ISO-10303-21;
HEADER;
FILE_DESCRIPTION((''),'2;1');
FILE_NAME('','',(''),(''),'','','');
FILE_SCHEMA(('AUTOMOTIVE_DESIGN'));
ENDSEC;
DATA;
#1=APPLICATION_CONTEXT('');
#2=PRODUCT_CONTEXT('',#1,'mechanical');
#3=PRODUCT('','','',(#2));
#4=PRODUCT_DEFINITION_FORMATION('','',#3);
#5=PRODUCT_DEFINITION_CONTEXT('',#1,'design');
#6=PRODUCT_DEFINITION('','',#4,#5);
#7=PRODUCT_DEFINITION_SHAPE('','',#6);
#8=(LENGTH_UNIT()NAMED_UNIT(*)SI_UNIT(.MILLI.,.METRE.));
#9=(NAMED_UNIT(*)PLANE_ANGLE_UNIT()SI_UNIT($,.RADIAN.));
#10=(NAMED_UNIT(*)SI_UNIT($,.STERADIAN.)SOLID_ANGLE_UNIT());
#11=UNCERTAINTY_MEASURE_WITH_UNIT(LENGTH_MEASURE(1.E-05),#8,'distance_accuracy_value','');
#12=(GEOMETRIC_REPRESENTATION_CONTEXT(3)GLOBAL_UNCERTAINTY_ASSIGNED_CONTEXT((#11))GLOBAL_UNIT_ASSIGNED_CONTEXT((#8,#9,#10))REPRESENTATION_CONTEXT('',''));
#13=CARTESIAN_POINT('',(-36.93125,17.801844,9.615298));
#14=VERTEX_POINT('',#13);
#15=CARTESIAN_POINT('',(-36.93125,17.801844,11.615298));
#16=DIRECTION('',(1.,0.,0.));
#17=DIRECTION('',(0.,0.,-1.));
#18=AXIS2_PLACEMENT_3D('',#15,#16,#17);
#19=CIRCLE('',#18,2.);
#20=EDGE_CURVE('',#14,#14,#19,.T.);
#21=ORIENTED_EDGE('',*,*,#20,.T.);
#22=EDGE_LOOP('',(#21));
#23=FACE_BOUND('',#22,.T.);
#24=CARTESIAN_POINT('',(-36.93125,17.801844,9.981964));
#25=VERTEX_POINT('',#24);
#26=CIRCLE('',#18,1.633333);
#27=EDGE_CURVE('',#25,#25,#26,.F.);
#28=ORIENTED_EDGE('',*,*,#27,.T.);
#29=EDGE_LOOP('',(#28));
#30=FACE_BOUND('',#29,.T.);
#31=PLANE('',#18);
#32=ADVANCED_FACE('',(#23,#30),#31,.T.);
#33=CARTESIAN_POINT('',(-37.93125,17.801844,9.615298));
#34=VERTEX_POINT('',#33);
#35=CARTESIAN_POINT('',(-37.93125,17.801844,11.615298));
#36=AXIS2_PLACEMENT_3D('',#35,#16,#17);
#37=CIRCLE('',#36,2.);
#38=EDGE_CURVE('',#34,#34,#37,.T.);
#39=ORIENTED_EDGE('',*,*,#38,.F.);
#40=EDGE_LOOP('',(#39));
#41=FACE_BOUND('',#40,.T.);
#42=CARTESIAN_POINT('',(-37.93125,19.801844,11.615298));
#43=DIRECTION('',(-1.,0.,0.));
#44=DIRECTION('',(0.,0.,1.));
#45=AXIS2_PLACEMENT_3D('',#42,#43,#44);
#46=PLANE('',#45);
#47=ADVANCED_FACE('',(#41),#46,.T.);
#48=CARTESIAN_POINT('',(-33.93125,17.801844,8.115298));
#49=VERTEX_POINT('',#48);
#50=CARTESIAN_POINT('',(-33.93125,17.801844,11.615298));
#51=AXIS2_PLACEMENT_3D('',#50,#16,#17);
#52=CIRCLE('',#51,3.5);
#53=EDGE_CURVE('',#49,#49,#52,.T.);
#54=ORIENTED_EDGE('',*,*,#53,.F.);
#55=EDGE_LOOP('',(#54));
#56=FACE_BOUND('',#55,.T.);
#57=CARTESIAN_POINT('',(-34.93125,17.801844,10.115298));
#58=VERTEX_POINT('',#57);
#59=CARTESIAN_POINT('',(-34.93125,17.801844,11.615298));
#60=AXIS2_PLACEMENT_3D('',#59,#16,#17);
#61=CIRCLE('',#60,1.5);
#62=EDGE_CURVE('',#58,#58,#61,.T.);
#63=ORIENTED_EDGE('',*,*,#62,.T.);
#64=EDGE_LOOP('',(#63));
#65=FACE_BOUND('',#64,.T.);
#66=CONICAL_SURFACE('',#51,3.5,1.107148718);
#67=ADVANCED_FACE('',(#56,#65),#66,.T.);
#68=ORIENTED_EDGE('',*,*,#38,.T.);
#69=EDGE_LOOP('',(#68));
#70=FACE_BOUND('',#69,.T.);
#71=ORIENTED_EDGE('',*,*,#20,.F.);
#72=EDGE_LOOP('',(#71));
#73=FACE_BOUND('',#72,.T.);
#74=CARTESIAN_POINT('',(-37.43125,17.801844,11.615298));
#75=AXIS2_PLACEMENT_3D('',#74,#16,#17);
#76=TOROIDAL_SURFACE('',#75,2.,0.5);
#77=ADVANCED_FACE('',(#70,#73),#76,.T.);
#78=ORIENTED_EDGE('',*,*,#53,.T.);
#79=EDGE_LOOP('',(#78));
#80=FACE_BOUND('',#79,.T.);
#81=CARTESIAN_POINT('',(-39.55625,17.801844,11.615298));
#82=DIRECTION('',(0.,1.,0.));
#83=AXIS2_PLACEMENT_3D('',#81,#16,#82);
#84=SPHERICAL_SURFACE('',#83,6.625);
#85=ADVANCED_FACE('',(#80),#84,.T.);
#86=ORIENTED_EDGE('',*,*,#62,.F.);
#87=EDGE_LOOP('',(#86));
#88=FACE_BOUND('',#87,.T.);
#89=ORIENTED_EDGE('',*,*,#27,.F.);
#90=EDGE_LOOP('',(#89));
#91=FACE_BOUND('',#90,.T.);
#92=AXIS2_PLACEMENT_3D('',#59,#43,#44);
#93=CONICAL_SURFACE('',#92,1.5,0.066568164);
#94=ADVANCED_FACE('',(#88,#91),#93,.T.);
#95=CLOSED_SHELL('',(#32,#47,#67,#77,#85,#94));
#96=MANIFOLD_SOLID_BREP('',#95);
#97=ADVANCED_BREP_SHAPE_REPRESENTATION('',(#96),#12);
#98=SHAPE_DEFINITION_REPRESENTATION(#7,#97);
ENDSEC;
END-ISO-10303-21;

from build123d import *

# Parameters (mm, degrees)
CUT_EXTRUDE_1_DEPTH      = 64.231655884
CUT_EXTRUDE_1_DEPTH_BACK = 64.231655884
SKETCH_1_W               = 40
SKETCH_1_H               = 9


# Read off the part's stored shape, not the designer's step: Кнопка канцелярская
with BuildPart() as part:
    # Other 325 outline → Other 325 (revolve)
    with BuildSketch(Plane(origin=(0, 17.801844428, 11.6152978), x_dir=(0, 1, 0), z_dir=(0, 0, -1))):
        with BuildLine():
            Line((0, -32.931249855), (0, -44.931249855))
            Line((0, -44.931249855), (4.5, -44.931249855))
            ThreePointArc((4.5, -44.931249855), (3.767766953, -43.163482902), (2, -42.431249855))
            Line((2, -42.431249855), (1.5, -34.931249855))
            Line((1.5, -34.931249855), (3.500000006, -33.931249858))
            ThreePointArc((3.500000006, -33.931249858), (1.820027476, -33.186153702), (0, -32.931249855))
        make_face()
    revolve(axis=Axis((0, 17.801844428, 11.6152978), (1, 0, 0)))


with BuildPart() as body_2:
    # Other 325 2 outline → Other 325 2 (revolve)
    with BuildSketch(Plane(origin=(0, 17.801844428, 11.6152978), x_dir=(0, 1, 0), z_dir=(0, 0, -1))):
        with BuildLine():
            Line((0.6, -44.931249855), (0, -44.931249855))
            Line((0, -44.931249855), (0, -56.931249855))
            Line((0, -56.931249855), (0.489363529, -53.66882633))
            ThreePointArc((0.489363529, -53.66882633), (0.572302525, -52.929184099), (0.6, -52.185421801))
            Line((0.6, -52.185421801), (0.6, -44.931249855))
        make_face()
    revolve(axis=Axis((0, 17.801844428, 11.6152978), (1, 0, 0)))


with BuildPart() as cut_extrude_1_tool:
    # Эскиз1 → Вырез-Вытянуть1 (new, two sides: drawn at the far end of the back side and taken through both)
    with BuildSketch(Plane.XY.offset(-CUT_EXTRUDE_1_DEPTH_BACK)):
        with Locations((-56.931249855, 17.801844428)):
            Rectangle(SKETCH_1_W, SKETCH_1_H)
    extrude(amount=CUT_EXTRUDE_1_DEPTH + CUT_EXTRUDE_1_DEPTH_BACK)


with BuildPart() as part_1:
    add(part.part)

    # Вырез-Вытянуть1: cut by cut_extrude_1_tool
    add(cut_extrude_1_tool.part, mode=Mode.SUBTRACT)

    # Эскиз2 → Повернуть1 (revolve)
    with BuildSketch(Plane(origin=(-44.931249855, 17.801844428, 11.6152978), x_dir=(1, 0, 0), z_dir=(0, 0, 1)), mode=Mode.PRIVATE) as revolve_1_sk:
        with BuildLine():
            Line((8, 0), (8, 2))
            ThreePointArc((8, 2), (7.5, 2.5), (7, 2))
            Line((7, 2), (7, 0))
            Line((7, 0), (8, 0))
        make_face()
    revolve(revolve_1_sk.sketch.rotate(Axis((-36.931249855, 17.801844428, 11.6152978), (-1, 0, 0)), 90), axis=Axis((-36.931249855, 17.801844428, 11.6152978), (-1, 0, 0)))


with BuildPart() as body_2_1:
    add(body_2.part)

    # Вырез-Вытянуть1: cut by cut_extrude_1_tool
    add(cut_extrude_1_tool.part, mode=Mode.SUBTRACT)


solid = part_1.part
